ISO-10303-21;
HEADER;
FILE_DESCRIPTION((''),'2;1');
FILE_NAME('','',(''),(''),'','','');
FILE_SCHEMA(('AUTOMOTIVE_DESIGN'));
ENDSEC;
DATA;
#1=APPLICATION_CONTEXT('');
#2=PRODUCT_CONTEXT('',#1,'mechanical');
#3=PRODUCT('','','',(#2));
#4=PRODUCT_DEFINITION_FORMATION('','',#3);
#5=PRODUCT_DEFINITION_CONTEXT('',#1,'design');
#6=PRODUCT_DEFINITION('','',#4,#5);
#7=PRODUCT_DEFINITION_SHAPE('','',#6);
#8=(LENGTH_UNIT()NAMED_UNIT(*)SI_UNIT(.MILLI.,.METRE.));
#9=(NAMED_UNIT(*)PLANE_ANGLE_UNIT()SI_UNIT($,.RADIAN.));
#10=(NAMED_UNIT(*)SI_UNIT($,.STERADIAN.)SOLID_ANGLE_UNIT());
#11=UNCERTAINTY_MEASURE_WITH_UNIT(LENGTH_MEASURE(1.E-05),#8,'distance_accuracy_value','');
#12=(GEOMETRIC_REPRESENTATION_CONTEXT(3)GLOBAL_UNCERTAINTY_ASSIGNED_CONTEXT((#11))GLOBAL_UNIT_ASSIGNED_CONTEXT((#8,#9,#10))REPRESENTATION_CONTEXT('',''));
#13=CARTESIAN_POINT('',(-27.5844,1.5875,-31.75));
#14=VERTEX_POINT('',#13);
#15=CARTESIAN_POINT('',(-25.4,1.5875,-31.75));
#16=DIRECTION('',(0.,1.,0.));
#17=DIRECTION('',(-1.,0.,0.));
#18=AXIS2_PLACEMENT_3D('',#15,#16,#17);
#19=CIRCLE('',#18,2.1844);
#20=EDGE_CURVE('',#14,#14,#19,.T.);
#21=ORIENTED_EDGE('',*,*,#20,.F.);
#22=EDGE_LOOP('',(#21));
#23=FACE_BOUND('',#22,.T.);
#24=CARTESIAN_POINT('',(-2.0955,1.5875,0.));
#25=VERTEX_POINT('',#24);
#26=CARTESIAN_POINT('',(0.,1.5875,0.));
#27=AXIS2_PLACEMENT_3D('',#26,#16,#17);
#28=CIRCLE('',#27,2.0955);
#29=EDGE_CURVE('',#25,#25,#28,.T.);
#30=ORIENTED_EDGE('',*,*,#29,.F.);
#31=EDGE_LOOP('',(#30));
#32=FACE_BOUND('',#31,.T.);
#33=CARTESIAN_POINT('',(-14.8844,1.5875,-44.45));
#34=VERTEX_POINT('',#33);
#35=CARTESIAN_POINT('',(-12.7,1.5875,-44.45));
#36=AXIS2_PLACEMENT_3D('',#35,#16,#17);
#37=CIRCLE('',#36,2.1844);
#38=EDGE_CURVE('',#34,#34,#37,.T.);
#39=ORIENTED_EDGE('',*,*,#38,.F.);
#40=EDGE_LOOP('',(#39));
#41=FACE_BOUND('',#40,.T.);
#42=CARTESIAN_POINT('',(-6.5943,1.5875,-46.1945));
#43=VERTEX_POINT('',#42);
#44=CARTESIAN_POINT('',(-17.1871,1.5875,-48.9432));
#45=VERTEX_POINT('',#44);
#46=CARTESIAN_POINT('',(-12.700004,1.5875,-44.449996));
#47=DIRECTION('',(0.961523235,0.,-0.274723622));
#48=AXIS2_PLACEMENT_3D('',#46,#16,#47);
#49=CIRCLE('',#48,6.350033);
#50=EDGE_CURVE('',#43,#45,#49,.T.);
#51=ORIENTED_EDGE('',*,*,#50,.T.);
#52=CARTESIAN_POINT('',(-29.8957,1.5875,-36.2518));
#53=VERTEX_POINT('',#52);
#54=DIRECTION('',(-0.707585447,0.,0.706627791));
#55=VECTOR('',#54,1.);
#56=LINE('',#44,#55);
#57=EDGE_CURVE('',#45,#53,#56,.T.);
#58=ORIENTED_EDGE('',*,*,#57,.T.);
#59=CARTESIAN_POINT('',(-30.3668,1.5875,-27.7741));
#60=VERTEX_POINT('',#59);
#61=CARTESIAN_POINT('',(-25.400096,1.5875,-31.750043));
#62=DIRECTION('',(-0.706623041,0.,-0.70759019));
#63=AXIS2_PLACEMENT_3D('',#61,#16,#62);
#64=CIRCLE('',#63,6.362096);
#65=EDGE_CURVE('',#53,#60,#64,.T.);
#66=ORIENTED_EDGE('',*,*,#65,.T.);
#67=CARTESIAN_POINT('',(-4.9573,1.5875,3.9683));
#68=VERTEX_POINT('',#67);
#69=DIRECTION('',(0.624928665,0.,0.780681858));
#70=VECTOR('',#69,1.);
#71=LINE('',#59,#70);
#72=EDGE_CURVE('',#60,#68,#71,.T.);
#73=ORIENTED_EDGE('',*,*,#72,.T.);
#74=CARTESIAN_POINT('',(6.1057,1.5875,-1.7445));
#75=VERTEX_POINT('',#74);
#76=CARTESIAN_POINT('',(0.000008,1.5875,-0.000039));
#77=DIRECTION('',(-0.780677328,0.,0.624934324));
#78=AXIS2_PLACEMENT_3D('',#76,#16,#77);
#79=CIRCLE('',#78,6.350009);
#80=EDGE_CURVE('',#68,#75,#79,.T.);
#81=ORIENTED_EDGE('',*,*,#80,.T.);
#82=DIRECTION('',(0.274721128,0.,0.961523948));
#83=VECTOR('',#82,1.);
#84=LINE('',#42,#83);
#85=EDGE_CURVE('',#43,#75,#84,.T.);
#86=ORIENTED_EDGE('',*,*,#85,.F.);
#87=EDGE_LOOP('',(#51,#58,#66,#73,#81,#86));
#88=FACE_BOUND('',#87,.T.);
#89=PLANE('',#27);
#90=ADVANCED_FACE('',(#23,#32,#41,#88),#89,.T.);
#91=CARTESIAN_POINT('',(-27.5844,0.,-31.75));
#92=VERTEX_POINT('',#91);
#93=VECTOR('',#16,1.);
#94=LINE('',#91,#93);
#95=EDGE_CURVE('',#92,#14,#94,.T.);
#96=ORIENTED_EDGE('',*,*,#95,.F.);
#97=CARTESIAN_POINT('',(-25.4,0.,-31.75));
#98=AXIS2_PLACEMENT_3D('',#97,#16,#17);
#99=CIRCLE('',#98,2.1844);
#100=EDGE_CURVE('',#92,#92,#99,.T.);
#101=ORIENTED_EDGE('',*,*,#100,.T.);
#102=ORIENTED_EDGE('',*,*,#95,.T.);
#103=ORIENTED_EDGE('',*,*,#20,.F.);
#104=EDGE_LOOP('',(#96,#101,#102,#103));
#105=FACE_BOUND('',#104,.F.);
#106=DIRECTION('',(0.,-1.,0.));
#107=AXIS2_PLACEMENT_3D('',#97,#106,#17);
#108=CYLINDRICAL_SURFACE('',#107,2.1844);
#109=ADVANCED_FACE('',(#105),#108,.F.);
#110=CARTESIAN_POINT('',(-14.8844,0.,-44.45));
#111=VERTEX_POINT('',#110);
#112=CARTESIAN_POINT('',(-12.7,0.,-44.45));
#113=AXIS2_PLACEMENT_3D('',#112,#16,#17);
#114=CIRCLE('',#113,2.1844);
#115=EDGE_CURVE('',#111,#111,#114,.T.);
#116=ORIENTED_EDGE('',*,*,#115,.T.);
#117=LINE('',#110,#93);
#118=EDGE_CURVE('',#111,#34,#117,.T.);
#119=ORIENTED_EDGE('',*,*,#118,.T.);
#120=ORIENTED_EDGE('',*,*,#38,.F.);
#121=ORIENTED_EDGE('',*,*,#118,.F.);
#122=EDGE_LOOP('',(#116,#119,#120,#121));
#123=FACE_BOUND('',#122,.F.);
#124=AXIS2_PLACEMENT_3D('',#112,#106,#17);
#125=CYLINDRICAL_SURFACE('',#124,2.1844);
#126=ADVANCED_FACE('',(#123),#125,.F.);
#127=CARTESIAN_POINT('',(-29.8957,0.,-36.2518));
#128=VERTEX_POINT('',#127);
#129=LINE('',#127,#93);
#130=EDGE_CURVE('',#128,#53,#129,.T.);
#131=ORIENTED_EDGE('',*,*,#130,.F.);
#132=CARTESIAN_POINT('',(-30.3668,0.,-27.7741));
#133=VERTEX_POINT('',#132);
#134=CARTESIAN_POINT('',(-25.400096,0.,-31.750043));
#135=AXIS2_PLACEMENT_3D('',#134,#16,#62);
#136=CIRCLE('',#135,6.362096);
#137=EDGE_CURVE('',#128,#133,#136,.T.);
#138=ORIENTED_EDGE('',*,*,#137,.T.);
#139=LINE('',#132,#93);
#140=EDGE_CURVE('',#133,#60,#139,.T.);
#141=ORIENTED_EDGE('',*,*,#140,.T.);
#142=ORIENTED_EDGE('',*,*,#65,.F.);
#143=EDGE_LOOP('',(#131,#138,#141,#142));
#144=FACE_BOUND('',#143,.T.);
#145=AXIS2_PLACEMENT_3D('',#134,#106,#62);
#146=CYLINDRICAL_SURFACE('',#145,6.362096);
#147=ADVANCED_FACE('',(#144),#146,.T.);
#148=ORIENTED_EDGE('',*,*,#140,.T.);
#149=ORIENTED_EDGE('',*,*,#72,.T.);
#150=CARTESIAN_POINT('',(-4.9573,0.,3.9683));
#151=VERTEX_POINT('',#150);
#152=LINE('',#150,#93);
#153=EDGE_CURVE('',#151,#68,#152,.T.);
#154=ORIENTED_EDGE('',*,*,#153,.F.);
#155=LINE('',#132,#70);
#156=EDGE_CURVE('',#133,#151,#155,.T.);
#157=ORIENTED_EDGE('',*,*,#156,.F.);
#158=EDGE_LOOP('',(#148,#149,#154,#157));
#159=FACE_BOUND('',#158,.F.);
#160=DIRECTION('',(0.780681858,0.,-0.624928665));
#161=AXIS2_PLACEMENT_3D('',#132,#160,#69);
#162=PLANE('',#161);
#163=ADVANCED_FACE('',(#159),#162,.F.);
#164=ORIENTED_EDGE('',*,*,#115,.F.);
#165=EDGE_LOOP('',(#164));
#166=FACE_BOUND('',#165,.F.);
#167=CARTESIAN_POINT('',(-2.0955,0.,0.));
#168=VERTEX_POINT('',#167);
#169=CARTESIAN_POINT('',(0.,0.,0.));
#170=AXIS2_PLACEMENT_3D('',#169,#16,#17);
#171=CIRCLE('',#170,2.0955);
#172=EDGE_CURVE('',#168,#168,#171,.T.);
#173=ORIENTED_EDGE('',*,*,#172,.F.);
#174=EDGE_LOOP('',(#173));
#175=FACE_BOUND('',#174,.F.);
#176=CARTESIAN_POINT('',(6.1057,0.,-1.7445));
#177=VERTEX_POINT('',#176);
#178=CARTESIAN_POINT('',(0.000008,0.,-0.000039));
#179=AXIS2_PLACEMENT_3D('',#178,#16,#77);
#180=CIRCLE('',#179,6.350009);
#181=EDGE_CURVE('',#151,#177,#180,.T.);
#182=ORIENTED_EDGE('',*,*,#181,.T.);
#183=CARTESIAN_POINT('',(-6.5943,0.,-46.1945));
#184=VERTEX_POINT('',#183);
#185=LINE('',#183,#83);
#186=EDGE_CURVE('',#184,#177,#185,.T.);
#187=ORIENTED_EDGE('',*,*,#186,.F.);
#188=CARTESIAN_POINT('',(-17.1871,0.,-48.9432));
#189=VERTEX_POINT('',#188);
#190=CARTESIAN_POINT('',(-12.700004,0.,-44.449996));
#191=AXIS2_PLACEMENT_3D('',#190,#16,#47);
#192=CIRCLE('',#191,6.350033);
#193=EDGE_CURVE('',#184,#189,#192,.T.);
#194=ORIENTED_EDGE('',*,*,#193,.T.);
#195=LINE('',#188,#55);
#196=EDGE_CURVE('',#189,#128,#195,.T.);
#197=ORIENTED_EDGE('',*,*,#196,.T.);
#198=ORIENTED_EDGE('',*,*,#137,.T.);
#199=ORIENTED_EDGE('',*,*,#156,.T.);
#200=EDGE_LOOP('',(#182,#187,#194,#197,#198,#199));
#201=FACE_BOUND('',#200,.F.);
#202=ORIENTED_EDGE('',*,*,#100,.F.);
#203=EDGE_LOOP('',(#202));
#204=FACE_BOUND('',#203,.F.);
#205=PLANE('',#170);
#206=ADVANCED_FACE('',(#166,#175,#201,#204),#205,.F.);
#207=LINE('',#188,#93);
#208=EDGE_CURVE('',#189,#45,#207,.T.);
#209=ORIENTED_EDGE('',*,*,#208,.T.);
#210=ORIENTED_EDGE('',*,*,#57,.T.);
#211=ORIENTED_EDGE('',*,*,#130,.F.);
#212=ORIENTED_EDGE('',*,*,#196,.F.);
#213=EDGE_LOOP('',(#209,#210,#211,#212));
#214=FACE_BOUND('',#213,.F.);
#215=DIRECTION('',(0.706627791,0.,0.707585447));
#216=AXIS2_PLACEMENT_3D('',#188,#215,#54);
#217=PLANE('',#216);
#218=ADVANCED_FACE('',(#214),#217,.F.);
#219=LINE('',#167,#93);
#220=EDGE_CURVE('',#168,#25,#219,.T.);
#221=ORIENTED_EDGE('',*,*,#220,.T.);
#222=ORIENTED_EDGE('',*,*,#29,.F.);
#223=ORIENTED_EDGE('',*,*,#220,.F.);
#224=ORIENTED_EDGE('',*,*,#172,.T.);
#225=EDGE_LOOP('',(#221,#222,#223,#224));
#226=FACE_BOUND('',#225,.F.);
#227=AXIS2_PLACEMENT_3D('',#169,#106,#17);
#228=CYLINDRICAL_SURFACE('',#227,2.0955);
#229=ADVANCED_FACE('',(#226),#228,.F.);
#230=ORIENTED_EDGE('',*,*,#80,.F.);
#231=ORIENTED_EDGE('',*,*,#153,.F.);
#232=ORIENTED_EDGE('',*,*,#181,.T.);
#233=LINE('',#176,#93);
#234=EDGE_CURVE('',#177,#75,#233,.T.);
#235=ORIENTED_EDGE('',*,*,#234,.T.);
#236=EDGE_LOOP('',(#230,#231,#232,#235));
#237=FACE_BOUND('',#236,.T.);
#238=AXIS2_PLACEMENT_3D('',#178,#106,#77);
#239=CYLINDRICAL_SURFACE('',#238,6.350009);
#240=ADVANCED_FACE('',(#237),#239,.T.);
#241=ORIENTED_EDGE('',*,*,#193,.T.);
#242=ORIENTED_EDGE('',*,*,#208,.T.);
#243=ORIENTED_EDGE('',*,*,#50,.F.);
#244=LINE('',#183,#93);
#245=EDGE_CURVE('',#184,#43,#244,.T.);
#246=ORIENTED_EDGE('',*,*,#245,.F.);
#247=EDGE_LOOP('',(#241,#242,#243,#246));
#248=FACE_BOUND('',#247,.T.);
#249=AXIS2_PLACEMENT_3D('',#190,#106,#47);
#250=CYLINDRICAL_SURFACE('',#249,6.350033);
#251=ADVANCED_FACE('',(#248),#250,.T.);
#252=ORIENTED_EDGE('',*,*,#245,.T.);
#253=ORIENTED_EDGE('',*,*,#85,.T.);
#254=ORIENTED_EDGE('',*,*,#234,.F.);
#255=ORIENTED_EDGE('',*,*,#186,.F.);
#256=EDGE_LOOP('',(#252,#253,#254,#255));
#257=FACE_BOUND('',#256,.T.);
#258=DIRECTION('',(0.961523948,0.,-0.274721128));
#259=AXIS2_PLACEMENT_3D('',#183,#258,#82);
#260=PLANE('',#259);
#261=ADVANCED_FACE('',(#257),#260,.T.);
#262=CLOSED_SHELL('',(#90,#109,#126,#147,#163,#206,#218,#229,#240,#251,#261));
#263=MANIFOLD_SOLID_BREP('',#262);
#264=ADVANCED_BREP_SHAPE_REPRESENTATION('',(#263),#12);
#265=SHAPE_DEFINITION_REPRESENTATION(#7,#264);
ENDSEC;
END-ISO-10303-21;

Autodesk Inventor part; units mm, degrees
ref_plane "YZ Plane" through (0, 0, 0) normal (1, 0, 0) x (0, 1, 0)
ref_plane "XZ Plane" through (0, 0, 0) normal (0, 1, 0) x (-1, 0, 0)
ref_plane "XY Plane" through (0, 0, 0) normal (0, 0, 1) x (1, 0, 0)
sketch "main" plane through (0, 0, 0) normal (0, 0, 1) x (1, 0, 0)
  circle A0 centre (7.7194, -42.2476) radius 2.1844
  circle A1 centre (20.4194, -29.5476) radius 2.1844
  circle A2 centre (-4.9806, 2.2024) radius 2.0955
  arc A3 (-0.0233, 6.1707) -> (-11.0863, 0.4579) centre (-4.9806, 2.2024) ccw
  arc A4 (1.6137, -43.9921) -> (12.2065, -46.7408) centre (7.7194, -42.2476) ccw
  arc A5 (24.9151, -34.0494) -> (25.3862, -25.5717) centre (20.4194, -29.5476) ccw
  line L0 (12.2065, -46.7408) -> (24.9151, -34.0494)
  line L1 (1.6137, -43.9921) -> (-11.0863, 0.4579)
  line L2 (25.3862, -25.5717) -> (-0.0233, 6.1707)
  point P0 (8.3889, -23.6516)
  dimension "d0" = 12.7
  dimension "d1" = 12.7
sketch "Sketch1" plane through (0, 0, 0) normal (0, 1, 0) x (-1, 0, 0)
  circle A0 centre (12.7, -44.45) radius 2.1844
  circle A1 centre (25.4, -31.75) radius 2.1844
  circle A2 centre (0, 0) radius 2.0955
  arc A3 (4.9573, 3.9683) -> (-6.1057, -1.7445) centre (0, 0) ccw
  arc A4 (6.5943, -46.1945) -> (17.1871, -48.9432) centre (12.7, -44.45) ccw
  arc A5 (29.8957, -36.2518) -> (30.3668, -27.7741) centre (25.4, -31.75) ccw
  line L0 (17.1871, -48.9432) -> (29.8957, -36.2518)
  line L1 (6.5943, -46.1945) -> (-6.1057, -1.7445)
  line L2 (30.3668, -27.7741) -> (4.9573, 3.9683)
extrude "Extrusion1" add sketch "Sketch1" along normal blind 1.5875
properties part number "gusset" material "Acetal Resin, White"
